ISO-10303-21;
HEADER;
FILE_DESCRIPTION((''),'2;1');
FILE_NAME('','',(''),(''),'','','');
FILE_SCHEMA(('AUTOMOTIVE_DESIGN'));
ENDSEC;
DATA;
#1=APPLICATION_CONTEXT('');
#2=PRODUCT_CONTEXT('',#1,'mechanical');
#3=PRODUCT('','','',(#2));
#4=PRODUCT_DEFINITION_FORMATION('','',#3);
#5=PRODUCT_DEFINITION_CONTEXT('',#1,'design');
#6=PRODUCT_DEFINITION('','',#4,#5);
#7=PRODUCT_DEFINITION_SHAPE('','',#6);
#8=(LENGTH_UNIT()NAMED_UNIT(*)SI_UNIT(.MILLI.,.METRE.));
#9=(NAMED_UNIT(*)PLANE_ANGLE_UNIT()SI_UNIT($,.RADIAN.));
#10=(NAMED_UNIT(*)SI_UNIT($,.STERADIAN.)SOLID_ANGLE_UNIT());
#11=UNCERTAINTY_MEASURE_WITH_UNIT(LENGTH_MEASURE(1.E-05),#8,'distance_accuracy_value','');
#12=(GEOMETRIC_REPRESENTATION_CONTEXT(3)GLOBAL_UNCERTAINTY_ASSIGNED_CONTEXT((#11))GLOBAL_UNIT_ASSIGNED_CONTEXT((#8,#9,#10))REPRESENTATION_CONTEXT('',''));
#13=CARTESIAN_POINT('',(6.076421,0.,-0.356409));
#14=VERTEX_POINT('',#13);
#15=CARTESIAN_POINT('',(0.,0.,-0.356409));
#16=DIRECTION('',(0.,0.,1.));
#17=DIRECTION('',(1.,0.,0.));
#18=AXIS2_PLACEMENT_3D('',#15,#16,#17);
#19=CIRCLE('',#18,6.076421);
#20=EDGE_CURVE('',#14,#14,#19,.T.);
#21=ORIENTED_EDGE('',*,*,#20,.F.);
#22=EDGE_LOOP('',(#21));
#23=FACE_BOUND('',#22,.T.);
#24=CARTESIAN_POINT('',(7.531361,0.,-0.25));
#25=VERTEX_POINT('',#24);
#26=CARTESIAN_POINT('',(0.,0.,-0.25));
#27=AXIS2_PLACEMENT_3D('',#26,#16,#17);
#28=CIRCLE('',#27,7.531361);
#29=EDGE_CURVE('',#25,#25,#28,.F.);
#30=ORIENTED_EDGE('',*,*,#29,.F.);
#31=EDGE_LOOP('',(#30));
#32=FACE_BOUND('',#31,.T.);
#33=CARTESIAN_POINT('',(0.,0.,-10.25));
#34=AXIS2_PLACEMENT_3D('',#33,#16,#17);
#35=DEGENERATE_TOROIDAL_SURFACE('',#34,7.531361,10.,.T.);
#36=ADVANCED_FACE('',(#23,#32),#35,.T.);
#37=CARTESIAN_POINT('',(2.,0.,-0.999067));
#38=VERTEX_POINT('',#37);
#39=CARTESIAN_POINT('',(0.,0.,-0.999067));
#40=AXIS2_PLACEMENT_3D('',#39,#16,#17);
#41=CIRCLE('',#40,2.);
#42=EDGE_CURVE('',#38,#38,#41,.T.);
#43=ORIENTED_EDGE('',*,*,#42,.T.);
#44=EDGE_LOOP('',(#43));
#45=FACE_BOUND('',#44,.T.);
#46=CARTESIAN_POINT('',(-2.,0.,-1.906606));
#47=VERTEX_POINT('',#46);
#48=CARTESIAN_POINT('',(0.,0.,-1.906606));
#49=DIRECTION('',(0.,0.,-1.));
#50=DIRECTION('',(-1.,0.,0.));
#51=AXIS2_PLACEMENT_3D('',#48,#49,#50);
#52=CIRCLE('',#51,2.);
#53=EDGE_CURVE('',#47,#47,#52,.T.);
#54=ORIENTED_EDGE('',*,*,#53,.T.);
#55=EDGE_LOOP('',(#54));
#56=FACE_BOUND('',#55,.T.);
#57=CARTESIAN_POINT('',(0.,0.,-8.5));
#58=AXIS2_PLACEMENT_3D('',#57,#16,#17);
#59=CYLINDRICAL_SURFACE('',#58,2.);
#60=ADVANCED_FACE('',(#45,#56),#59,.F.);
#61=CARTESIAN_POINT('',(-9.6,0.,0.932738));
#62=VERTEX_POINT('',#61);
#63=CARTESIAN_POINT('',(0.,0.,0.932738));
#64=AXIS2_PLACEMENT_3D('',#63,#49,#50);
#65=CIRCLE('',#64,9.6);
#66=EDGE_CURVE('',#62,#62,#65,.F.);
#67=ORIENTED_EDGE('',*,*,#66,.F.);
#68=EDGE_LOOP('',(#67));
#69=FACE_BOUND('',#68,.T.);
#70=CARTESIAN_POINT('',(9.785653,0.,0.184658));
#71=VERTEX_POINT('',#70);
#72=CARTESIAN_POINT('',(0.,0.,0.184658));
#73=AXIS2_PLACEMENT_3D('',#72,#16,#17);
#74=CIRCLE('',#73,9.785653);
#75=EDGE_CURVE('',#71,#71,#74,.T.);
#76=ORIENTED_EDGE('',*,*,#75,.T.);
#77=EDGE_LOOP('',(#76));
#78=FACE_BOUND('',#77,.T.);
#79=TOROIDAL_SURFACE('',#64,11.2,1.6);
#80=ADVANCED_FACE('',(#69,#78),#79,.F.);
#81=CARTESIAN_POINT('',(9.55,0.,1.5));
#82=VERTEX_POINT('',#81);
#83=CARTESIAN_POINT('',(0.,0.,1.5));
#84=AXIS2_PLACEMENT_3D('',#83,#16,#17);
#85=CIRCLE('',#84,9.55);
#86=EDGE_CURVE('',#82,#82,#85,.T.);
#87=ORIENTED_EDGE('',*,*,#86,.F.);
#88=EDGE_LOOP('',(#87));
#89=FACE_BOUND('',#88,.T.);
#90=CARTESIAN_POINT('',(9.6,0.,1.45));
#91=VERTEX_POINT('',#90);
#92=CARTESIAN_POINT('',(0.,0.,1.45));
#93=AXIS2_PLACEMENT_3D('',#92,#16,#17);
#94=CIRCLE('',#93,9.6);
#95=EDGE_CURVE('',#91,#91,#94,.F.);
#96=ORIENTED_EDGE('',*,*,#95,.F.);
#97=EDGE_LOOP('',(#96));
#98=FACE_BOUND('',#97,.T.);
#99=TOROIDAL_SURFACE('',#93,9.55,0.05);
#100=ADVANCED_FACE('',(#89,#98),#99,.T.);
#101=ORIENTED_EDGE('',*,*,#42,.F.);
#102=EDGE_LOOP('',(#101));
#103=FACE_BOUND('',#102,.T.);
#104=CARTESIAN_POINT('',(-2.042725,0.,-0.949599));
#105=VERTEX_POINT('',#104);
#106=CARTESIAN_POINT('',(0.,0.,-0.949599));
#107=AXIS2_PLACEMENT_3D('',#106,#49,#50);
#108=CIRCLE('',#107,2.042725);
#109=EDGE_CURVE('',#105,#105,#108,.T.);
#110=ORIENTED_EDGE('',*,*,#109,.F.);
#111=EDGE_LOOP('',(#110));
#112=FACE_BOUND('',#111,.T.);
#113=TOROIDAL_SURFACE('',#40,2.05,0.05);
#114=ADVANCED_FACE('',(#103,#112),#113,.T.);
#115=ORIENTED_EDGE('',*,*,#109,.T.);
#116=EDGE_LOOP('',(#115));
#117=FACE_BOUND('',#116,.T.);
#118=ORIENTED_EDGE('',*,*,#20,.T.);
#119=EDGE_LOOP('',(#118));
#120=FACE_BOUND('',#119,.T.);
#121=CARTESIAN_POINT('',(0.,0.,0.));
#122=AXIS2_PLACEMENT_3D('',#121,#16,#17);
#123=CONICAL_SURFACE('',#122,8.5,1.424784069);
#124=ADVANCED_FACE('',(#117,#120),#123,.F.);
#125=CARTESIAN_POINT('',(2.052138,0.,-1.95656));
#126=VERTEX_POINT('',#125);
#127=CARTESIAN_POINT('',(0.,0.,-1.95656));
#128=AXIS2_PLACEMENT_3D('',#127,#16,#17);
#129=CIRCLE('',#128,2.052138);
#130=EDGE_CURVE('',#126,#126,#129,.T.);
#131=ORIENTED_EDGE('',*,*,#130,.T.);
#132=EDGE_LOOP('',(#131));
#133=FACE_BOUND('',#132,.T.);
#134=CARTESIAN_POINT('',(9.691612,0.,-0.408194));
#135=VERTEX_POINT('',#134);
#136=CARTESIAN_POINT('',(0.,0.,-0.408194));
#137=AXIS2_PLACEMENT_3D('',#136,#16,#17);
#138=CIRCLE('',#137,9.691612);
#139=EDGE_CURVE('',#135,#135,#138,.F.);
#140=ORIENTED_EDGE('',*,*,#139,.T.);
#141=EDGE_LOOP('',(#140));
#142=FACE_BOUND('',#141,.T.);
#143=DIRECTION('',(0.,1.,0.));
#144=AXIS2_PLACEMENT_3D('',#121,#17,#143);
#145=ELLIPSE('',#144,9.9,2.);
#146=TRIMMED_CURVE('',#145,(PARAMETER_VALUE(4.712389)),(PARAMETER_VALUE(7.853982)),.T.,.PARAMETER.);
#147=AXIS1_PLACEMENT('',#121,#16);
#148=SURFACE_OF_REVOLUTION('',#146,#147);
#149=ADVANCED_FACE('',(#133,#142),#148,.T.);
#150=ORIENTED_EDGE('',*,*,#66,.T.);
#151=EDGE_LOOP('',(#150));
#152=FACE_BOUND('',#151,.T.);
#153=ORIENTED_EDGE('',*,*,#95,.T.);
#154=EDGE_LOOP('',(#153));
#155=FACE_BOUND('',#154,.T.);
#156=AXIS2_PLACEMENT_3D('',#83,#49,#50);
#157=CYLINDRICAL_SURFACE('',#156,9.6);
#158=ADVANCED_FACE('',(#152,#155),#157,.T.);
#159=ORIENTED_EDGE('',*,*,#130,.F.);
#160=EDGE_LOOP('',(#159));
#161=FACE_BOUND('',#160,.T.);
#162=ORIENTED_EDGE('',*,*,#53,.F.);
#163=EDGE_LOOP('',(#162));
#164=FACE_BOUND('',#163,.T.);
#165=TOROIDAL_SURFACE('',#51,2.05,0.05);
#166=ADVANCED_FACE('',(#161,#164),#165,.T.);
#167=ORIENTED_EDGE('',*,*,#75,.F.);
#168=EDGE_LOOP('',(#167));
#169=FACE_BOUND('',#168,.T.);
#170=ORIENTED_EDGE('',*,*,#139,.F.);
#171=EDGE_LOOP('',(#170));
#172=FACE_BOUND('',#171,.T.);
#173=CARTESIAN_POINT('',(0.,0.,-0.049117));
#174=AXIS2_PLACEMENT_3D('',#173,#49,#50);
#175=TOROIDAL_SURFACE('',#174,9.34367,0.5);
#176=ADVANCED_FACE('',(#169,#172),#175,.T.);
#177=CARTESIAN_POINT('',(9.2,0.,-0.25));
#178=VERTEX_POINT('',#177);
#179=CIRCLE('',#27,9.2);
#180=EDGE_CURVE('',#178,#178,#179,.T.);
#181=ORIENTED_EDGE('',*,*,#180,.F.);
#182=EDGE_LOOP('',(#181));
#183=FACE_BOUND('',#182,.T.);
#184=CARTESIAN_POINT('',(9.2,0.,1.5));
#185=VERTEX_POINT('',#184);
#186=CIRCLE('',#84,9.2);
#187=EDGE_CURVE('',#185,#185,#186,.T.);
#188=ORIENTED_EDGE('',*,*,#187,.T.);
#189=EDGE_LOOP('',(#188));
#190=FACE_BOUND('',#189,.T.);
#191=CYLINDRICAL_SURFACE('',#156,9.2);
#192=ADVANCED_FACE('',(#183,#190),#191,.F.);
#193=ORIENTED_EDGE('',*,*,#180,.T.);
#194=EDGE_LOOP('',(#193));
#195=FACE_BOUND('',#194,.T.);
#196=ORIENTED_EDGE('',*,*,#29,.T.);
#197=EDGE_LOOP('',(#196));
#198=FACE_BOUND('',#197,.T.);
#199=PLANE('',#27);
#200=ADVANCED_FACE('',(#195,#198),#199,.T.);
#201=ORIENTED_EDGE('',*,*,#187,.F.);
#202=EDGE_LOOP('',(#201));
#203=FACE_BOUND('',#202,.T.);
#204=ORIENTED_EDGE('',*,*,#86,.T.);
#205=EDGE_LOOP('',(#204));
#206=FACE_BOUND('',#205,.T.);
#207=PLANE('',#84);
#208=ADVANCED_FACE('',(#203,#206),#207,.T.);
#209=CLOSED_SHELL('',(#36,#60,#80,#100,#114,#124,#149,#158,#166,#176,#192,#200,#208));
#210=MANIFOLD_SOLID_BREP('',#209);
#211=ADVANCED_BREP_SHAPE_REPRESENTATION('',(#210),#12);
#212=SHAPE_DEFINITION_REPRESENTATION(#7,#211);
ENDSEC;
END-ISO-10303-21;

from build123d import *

# Parameters (mm, degrees)
SKETCH1_R           = 9.6
SKETCH1_R_2         = 9.2
EXTRUDE_THIN1_DEPTH = 1.5
SKETCH5_R           = 2
CUT_EXTRUDE1_DEPTH  = 10
FILLET1_R           = 1.6
CUT_EXTRUDE2_START  = -0.25
SKETCH6_R           = 9.2
CUT_EXTRUDE2_DEPTH  = 0.25
FILLET3_R           = 10
FILLET4_R           = 0.5
FILLET5_R           = 0.05
FILLET6_R           = 0.05


with BuildPart() as part:
    # Sketch1 → Extrude-Thin1 (new body)
    with BuildSketch(Plane(origin=(0, 0, 0), x_dir=(0, 1, 0), z_dir=(0, 0, 1))):
        Circle(SKETCH1_R)
        Circle(SKETCH1_R_2, mode=Mode.SUBTRACT)
    extrude(amount=EXTRUDE_THIN1_DEPTH)

    # Sketch4 → Revolve1 (revolve)
    with BuildSketch(Plane.YZ, mode=Mode.PRIVATE) as revolve1_sk:
        with BuildLine():
            Line((0, -1.25), (0, -2))
            add(Edge.make_bspline(
                [(0, -2), (9.9, -2), (9.9, 0)],
                knots=[4.71238898, 4.71238898, 4.71238898, 6.283185307, 6.283185307, 6.283185307], degree=2, weights=[1, 0.707106781, 1]))
            Line((9.9, 0), (8.5, 0))
            Line((8.5, 0), (0, -1.25))
        make_face()
    revolve(revolve1_sk.sketch.rotate(Axis((0, 0, 0), (0, 0, -1)), 90), axis=Axis((0, 0, 0), (0, 0, -1)))

    # Sketch5 → Cut-Extrude1 (cut)
    with BuildSketch(Plane.XY.offset(1.5)):
        Circle(SKETCH5_R)
    extrude(amount=-CUT_EXTRUDE1_DEPTH, mode=Mode.SUBTRACT)

    # Fillet1
    # the kernel refuses this fillet: 1.6 mm, written as the material it adds along each edge
    with BuildSketch(Plane(origin=(0, 0, 0), x_dir=(0, 1, 0), z_dir=(1, 0, 0))) as fillet1_piece_1:
        with BuildLine():
            CenterArc((11.2, 0.932737905), FILLET1_R, 180, 35.659087696)
            Line((9.6, 0.932737905), (9.568, 0.932737905))
            Line((9.568, 0.932737905), (9.568, 0))
            Line((9.568, 0), (9.6, -0.032))
            ThreePointArc((9.6, -0.032), (9.75, -0.032), (9.874, -0.018654758))
            Line((9.874, -0.018654758), (9.9, 0))
        make_face()
    revolve(axis=Axis((0, 0, 0), (0, 0, 1)))

    # Sketch6 → Cut-Extrude2 (cut)
    with BuildSketch(Plane(origin=(0, 0, 0), x_dir=(0, 1, 0), z_dir=(0, 0, 1)).offset(CUT_EXTRUDE2_START)):
        with Locations(Location((0, 0, 0), (0, 0, 270))):
            Circle(SKETCH6_R)
    extrude(amount=CUT_EXTRUDE2_DEPTH, mode=Mode.SUBTRACT)

    # Fillet3
    fillet3_edges = [part.edges().sort_by_distance(p)[0] for p in [
        (-6.8, 0, -0.25),
    ]]
    fillet(fillet3_edges, radius=FILLET3_R)

    # Fillet4
    # the kernel refuses this fillet: 0.5 mm, written as the material it takes off along each edge
    with BuildSketch(Plane(origin=(0, 0, 0), x_dir=(1, 0, 0), z_dir=(0, 1, 0))) as fillet4_piece_1:
        with BuildLine():
            CenterArc((9.343669863, 0.049116678), FILLET4_R, 332.124633973, 73.777653)
            Line((9.785653229, -0.184658223), (9.794492896, -0.189333721))
            ThreePointArc((9.794492896, -0.189333721), (9.848191584, -0.095651287), (9.908125, -0.005829612))
            Line((9.908125, -0.005829612), (9.91, 0))
            ThreePointArc((9.91, 0), (9.844806059, 0.231789199), (9.69857077, 0.415375256))
            Line((9.69857077, 0.415375256), (9.691611929, 0.408193715))
        make_face()
    revolve(axis=Axis((0, 0, 0), (0, 0, -1)), revolution_arc=270, mode=Mode.SUBTRACT)
    with BuildSketch(Plane(origin=(0, 0, 0), x_dir=(0, 1, 0), z_dir=(-1, 0, 0))) as fillet4_piece_2:
        with BuildLine():
            CenterArc((9.343669863, 0.049116678), FILLET4_R, 332.124633973, 73.777653)
            Line((9.785653229, -0.184658223), (9.794492896, -0.189333721))
            ThreePointArc((9.794492896, -0.189333721), (9.848191584, -0.095651287), (9.908125, -0.005829612))
            Line((9.908125, -0.005829612), (9.91, 0))
            ThreePointArc((9.91, 0), (9.844806059, 0.231789199), (9.69857077, 0.415375256))
            Line((9.69857077, 0.415375256), (9.691611929, 0.408193715))
        make_face()
    revolve(axis=Axis((0, 0, 0), (0, 0, -1)), revolution_arc=90, mode=Mode.SUBTRACT)

    # Fillet5
    fillet5_edges = [part.edges().sort_by_distance(p)[0] for p in [
        (-1.999999999, 1e-09, -1.958762709),
        (-2, 0, -0.955882353),
    ]]
    fillet(fillet5_edges, radius=FILLET5_R)

    # Fillet6
    fillet6_edges = [part.edges().sort_by_distance(p)[0] for p in [
        (0, -9.6, 1.5),
    ]]
    fillet(fillet6_edges, radius=FILLET6_R)


solid = part.part
